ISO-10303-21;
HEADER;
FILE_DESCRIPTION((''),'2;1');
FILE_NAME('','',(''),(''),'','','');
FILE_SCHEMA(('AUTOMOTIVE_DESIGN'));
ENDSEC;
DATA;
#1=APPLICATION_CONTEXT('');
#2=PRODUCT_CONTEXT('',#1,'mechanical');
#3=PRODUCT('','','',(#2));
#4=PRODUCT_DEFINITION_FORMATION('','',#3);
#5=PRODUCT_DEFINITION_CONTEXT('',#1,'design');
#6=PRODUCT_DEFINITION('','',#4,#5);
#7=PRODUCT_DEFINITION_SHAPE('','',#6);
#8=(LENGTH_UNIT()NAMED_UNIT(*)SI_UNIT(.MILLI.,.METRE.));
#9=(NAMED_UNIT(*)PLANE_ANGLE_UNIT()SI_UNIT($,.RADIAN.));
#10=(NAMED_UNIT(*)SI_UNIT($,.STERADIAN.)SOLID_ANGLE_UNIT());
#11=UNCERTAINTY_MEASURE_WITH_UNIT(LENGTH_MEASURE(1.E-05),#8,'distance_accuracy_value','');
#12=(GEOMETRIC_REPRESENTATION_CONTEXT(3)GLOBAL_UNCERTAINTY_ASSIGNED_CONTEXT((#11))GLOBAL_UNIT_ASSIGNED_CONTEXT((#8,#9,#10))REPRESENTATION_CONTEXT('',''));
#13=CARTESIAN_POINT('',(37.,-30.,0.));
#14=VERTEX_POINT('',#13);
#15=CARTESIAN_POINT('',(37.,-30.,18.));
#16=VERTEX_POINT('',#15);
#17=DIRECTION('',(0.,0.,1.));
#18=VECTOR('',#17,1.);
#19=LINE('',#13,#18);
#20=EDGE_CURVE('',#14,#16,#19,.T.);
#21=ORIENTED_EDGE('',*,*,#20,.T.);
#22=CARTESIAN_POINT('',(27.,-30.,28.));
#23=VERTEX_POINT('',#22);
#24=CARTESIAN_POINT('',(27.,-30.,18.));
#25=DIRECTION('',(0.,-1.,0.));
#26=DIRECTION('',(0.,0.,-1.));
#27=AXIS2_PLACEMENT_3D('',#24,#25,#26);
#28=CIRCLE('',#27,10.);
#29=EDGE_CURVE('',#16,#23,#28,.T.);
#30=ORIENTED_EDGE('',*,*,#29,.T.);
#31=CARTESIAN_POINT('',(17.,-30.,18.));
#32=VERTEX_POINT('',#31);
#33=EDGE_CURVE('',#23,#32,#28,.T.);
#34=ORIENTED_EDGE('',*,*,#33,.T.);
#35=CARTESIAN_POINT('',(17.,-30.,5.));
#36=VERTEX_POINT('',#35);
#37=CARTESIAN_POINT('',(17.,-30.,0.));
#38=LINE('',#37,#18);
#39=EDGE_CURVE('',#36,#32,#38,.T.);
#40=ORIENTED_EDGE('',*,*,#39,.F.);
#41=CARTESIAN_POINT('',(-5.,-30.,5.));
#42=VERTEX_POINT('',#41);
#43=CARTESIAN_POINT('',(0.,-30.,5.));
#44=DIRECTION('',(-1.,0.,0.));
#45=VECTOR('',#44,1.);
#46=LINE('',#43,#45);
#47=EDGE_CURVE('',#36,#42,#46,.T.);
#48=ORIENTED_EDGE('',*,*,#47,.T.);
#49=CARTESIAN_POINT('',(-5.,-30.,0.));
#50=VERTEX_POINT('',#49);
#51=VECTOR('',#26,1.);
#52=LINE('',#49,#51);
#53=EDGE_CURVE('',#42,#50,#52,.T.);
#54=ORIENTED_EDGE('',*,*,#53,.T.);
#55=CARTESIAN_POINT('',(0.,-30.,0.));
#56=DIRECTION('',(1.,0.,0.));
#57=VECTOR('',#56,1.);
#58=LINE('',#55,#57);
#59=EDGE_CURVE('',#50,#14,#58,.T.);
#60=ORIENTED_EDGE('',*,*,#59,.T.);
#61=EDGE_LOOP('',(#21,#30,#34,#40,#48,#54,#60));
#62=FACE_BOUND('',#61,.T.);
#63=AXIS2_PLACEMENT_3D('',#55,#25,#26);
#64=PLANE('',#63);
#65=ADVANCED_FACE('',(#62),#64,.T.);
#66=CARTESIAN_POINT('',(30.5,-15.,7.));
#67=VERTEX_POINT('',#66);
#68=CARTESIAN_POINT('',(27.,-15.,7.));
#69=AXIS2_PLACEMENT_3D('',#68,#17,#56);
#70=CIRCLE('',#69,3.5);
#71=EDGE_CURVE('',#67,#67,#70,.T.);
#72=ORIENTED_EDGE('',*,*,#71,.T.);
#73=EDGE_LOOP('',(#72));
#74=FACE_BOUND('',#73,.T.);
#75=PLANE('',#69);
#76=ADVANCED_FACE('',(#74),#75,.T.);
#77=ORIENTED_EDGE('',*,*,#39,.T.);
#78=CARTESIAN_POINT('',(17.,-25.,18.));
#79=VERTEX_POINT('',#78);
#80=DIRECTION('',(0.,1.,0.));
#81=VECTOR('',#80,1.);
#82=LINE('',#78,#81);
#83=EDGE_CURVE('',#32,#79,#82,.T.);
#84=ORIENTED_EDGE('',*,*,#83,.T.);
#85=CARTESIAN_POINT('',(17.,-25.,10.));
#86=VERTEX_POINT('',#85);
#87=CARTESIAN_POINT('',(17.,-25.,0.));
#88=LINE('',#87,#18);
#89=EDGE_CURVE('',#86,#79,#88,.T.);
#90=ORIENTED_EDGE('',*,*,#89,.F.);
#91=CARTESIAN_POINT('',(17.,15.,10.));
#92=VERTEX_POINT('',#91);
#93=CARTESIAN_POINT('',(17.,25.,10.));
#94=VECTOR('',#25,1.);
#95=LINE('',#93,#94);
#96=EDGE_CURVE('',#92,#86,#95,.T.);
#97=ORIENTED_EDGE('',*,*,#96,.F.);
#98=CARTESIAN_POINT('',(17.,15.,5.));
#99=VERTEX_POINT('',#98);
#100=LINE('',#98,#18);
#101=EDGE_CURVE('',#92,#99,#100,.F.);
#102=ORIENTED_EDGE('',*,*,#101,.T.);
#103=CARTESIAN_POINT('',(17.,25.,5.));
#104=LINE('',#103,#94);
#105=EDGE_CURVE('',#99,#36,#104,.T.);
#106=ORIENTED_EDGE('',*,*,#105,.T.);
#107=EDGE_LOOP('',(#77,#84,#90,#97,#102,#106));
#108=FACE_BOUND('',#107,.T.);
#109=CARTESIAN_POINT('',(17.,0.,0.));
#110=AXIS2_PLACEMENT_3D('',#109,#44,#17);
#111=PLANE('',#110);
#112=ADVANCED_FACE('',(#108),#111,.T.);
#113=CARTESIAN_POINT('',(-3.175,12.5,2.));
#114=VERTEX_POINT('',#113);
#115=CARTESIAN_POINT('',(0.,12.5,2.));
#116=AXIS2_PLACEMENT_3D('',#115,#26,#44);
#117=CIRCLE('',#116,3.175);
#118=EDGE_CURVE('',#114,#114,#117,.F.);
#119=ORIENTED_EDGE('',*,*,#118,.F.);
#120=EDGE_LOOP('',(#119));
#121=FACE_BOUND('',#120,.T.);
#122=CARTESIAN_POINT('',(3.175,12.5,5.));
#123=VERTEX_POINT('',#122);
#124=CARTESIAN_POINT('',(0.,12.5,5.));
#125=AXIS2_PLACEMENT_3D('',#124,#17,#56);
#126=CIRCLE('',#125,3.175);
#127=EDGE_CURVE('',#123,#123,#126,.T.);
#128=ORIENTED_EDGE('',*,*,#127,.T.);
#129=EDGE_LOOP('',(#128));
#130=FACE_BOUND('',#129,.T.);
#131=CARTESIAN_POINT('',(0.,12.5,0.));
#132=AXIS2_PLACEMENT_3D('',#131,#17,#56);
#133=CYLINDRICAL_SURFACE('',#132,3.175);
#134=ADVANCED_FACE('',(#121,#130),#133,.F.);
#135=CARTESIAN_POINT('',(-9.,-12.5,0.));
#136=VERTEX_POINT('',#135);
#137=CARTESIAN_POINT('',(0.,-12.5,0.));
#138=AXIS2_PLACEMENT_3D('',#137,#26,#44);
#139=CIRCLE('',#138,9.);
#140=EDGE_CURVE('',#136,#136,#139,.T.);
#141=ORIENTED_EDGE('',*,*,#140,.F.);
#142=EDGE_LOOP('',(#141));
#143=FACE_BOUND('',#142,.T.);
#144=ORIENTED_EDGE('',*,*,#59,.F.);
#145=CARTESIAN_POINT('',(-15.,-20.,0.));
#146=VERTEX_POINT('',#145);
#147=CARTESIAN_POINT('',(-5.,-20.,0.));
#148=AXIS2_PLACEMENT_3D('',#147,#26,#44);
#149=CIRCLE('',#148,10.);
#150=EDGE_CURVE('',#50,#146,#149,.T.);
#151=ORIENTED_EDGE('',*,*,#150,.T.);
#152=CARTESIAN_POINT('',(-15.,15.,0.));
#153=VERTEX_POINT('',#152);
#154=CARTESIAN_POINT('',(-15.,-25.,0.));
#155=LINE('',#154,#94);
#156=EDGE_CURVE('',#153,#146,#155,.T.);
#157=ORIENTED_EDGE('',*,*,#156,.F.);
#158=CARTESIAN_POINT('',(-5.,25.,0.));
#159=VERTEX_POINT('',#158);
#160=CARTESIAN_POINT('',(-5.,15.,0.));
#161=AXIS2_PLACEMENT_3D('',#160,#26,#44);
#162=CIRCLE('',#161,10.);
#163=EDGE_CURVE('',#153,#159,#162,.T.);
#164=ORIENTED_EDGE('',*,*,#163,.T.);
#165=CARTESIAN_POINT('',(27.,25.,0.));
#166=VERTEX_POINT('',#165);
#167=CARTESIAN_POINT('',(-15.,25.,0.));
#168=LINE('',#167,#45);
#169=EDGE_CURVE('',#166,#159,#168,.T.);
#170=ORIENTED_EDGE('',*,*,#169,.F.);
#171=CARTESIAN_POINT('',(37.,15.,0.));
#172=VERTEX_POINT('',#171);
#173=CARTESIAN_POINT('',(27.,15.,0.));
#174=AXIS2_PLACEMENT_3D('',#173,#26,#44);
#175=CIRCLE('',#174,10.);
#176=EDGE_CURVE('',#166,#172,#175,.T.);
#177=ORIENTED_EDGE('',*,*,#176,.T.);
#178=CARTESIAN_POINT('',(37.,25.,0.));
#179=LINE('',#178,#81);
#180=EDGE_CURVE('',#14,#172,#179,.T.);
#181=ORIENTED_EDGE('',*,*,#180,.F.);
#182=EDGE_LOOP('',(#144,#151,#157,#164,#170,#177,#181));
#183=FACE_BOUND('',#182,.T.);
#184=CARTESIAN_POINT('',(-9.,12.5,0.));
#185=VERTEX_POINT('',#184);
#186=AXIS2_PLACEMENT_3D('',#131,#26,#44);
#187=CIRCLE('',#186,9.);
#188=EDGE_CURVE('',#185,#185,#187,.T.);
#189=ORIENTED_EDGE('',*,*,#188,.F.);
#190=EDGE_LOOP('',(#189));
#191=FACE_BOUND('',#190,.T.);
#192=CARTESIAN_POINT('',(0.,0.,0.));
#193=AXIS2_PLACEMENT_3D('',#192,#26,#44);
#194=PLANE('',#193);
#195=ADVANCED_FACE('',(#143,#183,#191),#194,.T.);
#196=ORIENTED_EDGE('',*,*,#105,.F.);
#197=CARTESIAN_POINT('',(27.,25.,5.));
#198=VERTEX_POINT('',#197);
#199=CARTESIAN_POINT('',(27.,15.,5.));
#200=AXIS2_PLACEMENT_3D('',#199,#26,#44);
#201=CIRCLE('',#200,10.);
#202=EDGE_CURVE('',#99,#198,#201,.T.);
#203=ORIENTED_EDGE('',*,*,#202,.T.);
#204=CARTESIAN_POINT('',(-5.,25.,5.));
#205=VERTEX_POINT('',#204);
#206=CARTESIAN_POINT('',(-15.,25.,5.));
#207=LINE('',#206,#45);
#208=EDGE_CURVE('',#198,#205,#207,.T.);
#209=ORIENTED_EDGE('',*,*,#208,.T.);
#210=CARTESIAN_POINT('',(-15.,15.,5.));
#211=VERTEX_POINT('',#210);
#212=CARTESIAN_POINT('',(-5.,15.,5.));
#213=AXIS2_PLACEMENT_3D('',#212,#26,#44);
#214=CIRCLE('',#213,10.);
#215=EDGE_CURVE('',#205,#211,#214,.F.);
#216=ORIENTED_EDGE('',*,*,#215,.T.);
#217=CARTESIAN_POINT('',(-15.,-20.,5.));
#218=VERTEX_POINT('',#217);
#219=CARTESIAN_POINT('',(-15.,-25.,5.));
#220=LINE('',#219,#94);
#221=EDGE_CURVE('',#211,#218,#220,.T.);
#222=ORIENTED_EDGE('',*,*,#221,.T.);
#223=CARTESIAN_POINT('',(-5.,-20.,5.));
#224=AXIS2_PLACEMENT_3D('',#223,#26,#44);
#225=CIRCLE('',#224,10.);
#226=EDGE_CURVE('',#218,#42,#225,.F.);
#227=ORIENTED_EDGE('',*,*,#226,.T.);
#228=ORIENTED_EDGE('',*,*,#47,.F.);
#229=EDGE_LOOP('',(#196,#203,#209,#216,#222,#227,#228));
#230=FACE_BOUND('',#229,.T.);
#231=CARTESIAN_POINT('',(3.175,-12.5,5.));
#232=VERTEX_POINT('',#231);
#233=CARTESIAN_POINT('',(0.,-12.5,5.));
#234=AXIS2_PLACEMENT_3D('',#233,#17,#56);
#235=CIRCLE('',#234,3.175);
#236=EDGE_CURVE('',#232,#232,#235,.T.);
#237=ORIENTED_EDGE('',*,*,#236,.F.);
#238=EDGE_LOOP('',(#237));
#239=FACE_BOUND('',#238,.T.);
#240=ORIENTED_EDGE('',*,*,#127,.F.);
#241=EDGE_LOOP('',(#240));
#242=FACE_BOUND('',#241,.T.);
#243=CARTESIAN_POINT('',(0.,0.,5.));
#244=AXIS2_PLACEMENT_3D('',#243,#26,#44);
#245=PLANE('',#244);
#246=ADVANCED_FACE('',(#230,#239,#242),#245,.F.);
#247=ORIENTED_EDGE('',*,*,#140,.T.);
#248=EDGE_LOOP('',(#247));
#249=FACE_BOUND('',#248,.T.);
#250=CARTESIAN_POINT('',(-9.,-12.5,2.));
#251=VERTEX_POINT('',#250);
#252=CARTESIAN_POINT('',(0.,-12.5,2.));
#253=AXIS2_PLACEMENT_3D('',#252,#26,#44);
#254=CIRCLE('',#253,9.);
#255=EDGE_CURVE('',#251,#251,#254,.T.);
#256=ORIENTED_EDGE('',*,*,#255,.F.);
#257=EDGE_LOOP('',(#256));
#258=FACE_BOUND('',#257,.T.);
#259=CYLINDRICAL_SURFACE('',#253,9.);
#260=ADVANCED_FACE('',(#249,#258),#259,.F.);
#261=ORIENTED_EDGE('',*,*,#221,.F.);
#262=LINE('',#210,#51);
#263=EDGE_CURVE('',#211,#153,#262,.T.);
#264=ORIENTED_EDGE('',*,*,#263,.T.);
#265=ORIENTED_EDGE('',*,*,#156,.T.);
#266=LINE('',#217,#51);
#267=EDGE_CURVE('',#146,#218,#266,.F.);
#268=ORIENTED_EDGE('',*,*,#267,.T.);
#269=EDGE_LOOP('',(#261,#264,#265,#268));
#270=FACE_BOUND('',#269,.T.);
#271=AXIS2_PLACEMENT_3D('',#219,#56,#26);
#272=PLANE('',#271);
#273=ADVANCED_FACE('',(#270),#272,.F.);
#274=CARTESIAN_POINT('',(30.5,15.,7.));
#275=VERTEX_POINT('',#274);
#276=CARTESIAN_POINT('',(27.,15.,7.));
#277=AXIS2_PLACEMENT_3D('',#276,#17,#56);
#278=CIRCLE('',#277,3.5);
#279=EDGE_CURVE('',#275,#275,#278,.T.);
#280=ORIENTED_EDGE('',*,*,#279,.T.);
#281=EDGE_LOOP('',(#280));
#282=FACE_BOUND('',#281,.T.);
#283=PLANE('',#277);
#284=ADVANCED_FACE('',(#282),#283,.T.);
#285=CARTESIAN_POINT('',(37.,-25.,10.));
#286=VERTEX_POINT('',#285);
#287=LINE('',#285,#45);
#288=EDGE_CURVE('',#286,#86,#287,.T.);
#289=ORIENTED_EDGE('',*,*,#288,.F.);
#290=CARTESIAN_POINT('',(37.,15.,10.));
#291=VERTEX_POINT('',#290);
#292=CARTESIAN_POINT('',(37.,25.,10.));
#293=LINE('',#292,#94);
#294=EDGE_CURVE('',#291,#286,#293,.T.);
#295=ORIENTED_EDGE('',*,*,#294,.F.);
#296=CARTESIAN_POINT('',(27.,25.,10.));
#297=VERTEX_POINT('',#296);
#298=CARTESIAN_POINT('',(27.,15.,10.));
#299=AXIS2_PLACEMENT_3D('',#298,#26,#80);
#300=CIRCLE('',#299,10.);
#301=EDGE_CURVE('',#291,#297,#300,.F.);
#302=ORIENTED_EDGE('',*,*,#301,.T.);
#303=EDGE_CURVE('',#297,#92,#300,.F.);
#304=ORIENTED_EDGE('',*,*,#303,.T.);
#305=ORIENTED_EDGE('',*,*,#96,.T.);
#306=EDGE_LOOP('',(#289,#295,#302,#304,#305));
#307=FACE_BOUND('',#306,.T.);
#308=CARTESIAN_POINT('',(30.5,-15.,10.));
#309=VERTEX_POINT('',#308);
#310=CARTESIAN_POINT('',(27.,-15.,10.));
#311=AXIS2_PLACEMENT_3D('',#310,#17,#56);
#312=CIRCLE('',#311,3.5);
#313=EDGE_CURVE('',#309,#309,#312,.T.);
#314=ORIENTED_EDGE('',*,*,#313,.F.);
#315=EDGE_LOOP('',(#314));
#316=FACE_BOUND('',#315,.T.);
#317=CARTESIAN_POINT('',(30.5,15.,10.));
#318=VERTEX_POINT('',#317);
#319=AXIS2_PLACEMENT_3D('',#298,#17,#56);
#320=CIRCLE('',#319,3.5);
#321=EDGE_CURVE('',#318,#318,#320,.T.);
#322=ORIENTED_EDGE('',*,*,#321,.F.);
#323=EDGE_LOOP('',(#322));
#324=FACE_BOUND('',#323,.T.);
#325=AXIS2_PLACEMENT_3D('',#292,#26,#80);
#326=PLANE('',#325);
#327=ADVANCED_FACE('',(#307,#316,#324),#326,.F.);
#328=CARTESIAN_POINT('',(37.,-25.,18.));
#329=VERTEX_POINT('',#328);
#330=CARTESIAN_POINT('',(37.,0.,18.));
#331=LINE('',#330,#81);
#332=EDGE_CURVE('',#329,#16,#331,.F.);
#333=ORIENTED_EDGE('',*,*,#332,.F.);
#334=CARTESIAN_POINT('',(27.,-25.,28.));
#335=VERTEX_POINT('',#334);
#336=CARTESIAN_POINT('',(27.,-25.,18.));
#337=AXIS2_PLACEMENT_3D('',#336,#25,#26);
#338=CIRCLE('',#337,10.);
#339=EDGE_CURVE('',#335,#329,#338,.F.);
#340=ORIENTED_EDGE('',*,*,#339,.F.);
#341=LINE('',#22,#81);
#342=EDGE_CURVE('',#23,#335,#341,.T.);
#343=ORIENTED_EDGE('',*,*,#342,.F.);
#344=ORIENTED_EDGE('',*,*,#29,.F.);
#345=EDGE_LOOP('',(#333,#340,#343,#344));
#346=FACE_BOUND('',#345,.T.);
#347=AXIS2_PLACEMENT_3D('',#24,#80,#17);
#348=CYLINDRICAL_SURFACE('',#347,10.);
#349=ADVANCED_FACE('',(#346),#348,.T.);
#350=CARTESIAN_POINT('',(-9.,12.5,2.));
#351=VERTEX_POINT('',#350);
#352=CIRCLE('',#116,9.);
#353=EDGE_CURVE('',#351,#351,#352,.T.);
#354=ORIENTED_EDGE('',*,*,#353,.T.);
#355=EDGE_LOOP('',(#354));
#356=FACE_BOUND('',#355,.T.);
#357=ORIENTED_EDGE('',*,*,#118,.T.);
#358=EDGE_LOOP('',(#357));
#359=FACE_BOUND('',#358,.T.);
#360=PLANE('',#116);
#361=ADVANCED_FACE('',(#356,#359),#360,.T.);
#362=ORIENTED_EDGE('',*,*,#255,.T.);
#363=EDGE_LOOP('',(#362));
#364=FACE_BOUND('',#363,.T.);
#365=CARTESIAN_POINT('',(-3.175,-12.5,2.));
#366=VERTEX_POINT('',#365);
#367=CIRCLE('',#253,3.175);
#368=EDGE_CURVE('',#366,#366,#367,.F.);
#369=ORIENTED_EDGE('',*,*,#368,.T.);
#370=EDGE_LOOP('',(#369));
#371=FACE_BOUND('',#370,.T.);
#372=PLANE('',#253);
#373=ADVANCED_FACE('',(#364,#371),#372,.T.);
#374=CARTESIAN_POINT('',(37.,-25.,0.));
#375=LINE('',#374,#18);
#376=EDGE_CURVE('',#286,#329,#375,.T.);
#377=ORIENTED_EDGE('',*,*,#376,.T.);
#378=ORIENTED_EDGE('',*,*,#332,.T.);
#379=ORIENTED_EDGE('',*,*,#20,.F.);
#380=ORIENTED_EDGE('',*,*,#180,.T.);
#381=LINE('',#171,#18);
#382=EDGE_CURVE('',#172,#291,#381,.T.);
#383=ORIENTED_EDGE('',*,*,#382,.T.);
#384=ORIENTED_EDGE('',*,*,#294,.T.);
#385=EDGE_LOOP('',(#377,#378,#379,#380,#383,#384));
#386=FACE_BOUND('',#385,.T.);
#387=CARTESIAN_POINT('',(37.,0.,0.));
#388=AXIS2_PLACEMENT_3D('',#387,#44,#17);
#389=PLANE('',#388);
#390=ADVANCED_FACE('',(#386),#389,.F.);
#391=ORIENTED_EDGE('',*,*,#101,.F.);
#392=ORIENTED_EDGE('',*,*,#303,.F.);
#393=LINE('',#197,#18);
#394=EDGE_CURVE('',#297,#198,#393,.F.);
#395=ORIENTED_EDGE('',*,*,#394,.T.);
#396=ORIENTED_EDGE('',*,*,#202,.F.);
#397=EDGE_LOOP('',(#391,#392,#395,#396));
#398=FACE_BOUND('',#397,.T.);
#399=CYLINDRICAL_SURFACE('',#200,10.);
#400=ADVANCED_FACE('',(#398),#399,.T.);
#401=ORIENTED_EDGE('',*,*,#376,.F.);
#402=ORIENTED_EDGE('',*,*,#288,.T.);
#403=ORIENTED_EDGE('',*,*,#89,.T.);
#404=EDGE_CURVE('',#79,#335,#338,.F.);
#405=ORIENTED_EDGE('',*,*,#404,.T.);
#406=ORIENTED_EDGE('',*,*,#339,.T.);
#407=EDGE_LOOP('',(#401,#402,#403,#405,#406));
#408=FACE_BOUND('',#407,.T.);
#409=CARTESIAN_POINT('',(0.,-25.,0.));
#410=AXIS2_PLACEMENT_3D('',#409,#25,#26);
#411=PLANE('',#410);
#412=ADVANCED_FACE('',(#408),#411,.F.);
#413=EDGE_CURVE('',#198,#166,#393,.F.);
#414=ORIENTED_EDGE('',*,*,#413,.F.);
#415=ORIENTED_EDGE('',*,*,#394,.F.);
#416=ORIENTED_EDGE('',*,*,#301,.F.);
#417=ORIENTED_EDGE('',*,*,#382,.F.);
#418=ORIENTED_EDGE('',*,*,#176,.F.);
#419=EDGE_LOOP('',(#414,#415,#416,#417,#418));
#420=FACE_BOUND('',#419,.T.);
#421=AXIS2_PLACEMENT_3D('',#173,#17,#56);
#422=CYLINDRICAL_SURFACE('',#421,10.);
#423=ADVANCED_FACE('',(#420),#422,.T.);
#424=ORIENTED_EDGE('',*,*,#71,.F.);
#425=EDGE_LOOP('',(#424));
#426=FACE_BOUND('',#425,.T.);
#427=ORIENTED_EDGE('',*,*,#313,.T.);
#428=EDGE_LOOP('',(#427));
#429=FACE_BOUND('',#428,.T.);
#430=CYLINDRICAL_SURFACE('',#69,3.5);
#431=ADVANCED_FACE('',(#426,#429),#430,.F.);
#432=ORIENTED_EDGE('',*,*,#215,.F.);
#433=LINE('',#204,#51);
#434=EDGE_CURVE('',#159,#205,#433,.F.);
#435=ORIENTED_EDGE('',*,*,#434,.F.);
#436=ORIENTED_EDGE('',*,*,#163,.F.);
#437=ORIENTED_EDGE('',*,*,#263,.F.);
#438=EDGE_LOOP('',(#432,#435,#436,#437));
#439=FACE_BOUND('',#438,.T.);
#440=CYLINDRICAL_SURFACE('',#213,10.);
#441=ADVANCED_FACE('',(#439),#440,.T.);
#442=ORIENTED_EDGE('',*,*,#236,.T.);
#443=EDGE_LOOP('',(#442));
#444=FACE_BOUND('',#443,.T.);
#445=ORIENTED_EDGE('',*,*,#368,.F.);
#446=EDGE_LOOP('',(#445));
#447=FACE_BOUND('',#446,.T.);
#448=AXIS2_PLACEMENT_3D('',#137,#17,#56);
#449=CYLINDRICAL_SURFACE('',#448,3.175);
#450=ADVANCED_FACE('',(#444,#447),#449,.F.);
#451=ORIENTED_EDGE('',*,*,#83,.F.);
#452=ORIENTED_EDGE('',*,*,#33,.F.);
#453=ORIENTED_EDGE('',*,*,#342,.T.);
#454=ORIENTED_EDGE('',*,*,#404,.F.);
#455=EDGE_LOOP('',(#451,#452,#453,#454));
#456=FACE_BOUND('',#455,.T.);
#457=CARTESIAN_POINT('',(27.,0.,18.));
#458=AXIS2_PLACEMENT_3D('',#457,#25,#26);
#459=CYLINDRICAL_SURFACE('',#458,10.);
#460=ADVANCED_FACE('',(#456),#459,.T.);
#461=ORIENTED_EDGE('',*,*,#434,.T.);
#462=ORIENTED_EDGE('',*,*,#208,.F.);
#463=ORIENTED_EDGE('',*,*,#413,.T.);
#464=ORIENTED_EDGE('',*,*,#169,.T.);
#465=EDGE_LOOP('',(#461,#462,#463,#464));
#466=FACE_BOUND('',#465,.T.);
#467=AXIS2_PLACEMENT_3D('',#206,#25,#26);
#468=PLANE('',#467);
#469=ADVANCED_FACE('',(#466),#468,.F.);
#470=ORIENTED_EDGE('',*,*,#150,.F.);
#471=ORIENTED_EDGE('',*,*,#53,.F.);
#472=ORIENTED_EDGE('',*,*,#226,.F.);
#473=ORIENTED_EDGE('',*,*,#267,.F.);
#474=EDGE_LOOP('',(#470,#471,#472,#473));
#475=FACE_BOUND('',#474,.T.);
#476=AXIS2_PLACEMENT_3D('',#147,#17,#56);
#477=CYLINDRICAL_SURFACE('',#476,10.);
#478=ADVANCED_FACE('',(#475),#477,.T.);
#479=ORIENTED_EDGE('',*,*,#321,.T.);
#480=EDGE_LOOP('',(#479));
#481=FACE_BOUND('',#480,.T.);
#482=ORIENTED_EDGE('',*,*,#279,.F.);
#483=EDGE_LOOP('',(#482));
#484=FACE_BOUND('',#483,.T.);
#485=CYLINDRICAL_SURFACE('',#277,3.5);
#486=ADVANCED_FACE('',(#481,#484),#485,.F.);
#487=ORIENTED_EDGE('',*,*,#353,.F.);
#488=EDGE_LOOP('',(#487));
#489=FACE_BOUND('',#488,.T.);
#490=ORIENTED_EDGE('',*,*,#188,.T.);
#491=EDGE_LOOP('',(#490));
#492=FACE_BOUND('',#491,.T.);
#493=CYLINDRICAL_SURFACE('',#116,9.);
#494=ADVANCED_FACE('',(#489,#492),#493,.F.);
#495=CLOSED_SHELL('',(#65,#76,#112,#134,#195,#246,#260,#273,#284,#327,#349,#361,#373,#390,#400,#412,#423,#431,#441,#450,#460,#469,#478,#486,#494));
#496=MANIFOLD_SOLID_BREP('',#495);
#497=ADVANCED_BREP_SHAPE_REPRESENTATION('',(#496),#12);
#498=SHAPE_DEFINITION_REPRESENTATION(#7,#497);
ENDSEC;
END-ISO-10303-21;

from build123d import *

# Parameters (mm, degrees)
SKETCH1_W           = 30
SKETCH1_H           = 50
BOSS_EXTRUDE1_DEPTH = 5
SKETCH5_R           = 3.175
CUT_EXTRUDE2_DEPTH  = 30.580398915
SKETCH2_W           = 5
SKETCH2_H           = 50
BOSS_EXTRUDE2_DEPTH = 2
SKETCH3_W           = 10
SKETCH3_H           = 50
BOSS_EXTRUDE3_DEPTH = 20
SKETCH4_R           = 3.5
CUT_EXTRUDE1_DEPTH  = 3
SKETCH6_R           = 9
CUT_EXTRUDE3_DEPTH  = 2
SKETCH7_W           = 32
SKETCH7_H           = 5
SKETCH7_W_2         = 20
SKETCH7_H_2         = 18
BOSS_EXTRUDE4_DEPTH = 5
FILLET1_R           = 10


with BuildPart() as part:
    # Sketch1 → Boss-Extrude1 (new body)
    with BuildSketch(Plane.XY):
        Rectangle(SKETCH1_W, SKETCH1_H)
    extrude(amount=BOSS_EXTRUDE1_DEPTH)

    # Sketch5 → Cut-Extrude2 (cut, through all)
    with BuildSketch(Plane.XY.offset(5)):
        with Locations((0, 12.5)):
            Circle(SKETCH5_R)
        with Locations((0, -12.5)):
            Circle(SKETCH5_R)
    extrude(amount=-CUT_EXTRUDE2_DEPTH, mode=Mode.SUBTRACT)

    # Sketch2 → Boss-Extrude2 (add)
    with BuildSketch(Plane(origin=(15, 0, 0), x_dir=(0, 0, -1), z_dir=(1, 0, 0))):
        with Locations((-2.5, 0)):
            Rectangle(SKETCH2_W, SKETCH2_H)
    extrude(amount=BOSS_EXTRUDE2_DEPTH)

    # Sketch3 → Boss-Extrude3 (add)
    with BuildSketch(Plane(origin=(17, 0, 0), x_dir=(0, 0, -1), z_dir=(1, 0, 0))):
        with Locations((-5, 0)):
            Rectangle(SKETCH3_W, SKETCH3_H)
    extrude(amount=BOSS_EXTRUDE3_DEPTH)

    # Sketch4 → Cut-Extrude1 (cut)
    with BuildSketch(Plane.XY.offset(10)):
        with Locations((27, 15)):
            Circle(SKETCH4_R)
        with Locations((27, -15)):
            Circle(SKETCH4_R)
    extrude(amount=-CUT_EXTRUDE1_DEPTH, mode=Mode.SUBTRACT)

    # Sketch6 → Cut-Extrude3 (cut)
    with BuildSketch(Plane(origin=(0, 0, 0), x_dir=(-1, 0, 0), z_dir=(0, 0, -1))):
        with Locations((0, 12.5)):
            Circle(SKETCH6_R)
        with Locations((0, -12.5)):
            Circle(SKETCH6_R)
    extrude(amount=-CUT_EXTRUDE3_DEPTH, mode=Mode.SUBTRACT)

    # Sketch7 → Boss-Extrude4 (add)
    with BuildSketch(Plane.XZ.offset(25)):
        with Locations((1, 2.5)):
            Rectangle(SKETCH7_W, SKETCH7_H)
        Polygon((17, 0), (37, 0), (37, 10), (17, 10), (17, 5), align=None)
        with Locations((27, 19)):
            Rectangle(SKETCH7_W_2, SKETCH7_H_2)
    extrude(amount=BOSS_EXTRUDE4_DEPTH)

    # Fillet1
    # the kernel refuses this fillet: 10 mm, written as the material it takes off along each edge
    with BuildSketch(Plane(origin=(17, 25, 5), x_dir=(0, -1, 0), z_dir=(0, 0, 1))) as fillet1_piece_1:
        with BuildLine():
            CenterArc((FILLET1_R, FILLET1_R), FILLET1_R, 180, 90)
            Line((0, FILLET1_R), (0, 0))
            Line((0, 0), (FILLET1_R, 0))
        make_face()
    extrude(amount=30, mode=Mode.SUBTRACT)
    with BuildSketch(Plane(origin=(37, 25, -25), x_dir=(0, -1, 0), z_dir=(0, 0, 1))) as fillet1_piece_2:
        with BuildLine():
            CenterArc((FILLET1_R, -FILLET1_R), FILLET1_R, 90, 90)
            Line((0, -FILLET1_R), (0, 0))
            Line((0, 0), (FILLET1_R, 0))
        make_face()
    extrude(amount=60, mode=Mode.SUBTRACT)
    with BuildSketch(Plane(origin=(37, 0, 28), x_dir=(0, 0, -1), z_dir=(0, -1, 0)), Plane(origin=(17, 0, 28), x_dir=(1, 0, 0), z_dir=(0, -1, 0))) as fillet1_piece_3:
        with BuildLine():
            CenterArc((FILLET1_R, -FILLET1_R), FILLET1_R, 90, 90)
            Line((0, -FILLET1_R), (0, 0))
            Line((0, 0), (FILLET1_R, 0))
        make_face()
    extrude(amount=55, mode=Mode.SUBTRACT)
    with BuildSketch(Plane(origin=(-15, -30, 30), x_dir=(0, 1, 0), z_dir=(0, 0, -1)), Plane(origin=(-15, 25, -25), x_dir=(0, -1, 0), z_dir=(0, 0, 1))) as fillet1_piece_4:
        with BuildLine():
            CenterArc((FILLET1_R, FILLET1_R), FILLET1_R, 180, 90)
            Line((0, FILLET1_R), (0, 0))
            Line((0, 0), (FILLET1_R, 0))
        make_face()
    extrude(amount=55, mode=Mode.SUBTRACT)


solid = part.part
